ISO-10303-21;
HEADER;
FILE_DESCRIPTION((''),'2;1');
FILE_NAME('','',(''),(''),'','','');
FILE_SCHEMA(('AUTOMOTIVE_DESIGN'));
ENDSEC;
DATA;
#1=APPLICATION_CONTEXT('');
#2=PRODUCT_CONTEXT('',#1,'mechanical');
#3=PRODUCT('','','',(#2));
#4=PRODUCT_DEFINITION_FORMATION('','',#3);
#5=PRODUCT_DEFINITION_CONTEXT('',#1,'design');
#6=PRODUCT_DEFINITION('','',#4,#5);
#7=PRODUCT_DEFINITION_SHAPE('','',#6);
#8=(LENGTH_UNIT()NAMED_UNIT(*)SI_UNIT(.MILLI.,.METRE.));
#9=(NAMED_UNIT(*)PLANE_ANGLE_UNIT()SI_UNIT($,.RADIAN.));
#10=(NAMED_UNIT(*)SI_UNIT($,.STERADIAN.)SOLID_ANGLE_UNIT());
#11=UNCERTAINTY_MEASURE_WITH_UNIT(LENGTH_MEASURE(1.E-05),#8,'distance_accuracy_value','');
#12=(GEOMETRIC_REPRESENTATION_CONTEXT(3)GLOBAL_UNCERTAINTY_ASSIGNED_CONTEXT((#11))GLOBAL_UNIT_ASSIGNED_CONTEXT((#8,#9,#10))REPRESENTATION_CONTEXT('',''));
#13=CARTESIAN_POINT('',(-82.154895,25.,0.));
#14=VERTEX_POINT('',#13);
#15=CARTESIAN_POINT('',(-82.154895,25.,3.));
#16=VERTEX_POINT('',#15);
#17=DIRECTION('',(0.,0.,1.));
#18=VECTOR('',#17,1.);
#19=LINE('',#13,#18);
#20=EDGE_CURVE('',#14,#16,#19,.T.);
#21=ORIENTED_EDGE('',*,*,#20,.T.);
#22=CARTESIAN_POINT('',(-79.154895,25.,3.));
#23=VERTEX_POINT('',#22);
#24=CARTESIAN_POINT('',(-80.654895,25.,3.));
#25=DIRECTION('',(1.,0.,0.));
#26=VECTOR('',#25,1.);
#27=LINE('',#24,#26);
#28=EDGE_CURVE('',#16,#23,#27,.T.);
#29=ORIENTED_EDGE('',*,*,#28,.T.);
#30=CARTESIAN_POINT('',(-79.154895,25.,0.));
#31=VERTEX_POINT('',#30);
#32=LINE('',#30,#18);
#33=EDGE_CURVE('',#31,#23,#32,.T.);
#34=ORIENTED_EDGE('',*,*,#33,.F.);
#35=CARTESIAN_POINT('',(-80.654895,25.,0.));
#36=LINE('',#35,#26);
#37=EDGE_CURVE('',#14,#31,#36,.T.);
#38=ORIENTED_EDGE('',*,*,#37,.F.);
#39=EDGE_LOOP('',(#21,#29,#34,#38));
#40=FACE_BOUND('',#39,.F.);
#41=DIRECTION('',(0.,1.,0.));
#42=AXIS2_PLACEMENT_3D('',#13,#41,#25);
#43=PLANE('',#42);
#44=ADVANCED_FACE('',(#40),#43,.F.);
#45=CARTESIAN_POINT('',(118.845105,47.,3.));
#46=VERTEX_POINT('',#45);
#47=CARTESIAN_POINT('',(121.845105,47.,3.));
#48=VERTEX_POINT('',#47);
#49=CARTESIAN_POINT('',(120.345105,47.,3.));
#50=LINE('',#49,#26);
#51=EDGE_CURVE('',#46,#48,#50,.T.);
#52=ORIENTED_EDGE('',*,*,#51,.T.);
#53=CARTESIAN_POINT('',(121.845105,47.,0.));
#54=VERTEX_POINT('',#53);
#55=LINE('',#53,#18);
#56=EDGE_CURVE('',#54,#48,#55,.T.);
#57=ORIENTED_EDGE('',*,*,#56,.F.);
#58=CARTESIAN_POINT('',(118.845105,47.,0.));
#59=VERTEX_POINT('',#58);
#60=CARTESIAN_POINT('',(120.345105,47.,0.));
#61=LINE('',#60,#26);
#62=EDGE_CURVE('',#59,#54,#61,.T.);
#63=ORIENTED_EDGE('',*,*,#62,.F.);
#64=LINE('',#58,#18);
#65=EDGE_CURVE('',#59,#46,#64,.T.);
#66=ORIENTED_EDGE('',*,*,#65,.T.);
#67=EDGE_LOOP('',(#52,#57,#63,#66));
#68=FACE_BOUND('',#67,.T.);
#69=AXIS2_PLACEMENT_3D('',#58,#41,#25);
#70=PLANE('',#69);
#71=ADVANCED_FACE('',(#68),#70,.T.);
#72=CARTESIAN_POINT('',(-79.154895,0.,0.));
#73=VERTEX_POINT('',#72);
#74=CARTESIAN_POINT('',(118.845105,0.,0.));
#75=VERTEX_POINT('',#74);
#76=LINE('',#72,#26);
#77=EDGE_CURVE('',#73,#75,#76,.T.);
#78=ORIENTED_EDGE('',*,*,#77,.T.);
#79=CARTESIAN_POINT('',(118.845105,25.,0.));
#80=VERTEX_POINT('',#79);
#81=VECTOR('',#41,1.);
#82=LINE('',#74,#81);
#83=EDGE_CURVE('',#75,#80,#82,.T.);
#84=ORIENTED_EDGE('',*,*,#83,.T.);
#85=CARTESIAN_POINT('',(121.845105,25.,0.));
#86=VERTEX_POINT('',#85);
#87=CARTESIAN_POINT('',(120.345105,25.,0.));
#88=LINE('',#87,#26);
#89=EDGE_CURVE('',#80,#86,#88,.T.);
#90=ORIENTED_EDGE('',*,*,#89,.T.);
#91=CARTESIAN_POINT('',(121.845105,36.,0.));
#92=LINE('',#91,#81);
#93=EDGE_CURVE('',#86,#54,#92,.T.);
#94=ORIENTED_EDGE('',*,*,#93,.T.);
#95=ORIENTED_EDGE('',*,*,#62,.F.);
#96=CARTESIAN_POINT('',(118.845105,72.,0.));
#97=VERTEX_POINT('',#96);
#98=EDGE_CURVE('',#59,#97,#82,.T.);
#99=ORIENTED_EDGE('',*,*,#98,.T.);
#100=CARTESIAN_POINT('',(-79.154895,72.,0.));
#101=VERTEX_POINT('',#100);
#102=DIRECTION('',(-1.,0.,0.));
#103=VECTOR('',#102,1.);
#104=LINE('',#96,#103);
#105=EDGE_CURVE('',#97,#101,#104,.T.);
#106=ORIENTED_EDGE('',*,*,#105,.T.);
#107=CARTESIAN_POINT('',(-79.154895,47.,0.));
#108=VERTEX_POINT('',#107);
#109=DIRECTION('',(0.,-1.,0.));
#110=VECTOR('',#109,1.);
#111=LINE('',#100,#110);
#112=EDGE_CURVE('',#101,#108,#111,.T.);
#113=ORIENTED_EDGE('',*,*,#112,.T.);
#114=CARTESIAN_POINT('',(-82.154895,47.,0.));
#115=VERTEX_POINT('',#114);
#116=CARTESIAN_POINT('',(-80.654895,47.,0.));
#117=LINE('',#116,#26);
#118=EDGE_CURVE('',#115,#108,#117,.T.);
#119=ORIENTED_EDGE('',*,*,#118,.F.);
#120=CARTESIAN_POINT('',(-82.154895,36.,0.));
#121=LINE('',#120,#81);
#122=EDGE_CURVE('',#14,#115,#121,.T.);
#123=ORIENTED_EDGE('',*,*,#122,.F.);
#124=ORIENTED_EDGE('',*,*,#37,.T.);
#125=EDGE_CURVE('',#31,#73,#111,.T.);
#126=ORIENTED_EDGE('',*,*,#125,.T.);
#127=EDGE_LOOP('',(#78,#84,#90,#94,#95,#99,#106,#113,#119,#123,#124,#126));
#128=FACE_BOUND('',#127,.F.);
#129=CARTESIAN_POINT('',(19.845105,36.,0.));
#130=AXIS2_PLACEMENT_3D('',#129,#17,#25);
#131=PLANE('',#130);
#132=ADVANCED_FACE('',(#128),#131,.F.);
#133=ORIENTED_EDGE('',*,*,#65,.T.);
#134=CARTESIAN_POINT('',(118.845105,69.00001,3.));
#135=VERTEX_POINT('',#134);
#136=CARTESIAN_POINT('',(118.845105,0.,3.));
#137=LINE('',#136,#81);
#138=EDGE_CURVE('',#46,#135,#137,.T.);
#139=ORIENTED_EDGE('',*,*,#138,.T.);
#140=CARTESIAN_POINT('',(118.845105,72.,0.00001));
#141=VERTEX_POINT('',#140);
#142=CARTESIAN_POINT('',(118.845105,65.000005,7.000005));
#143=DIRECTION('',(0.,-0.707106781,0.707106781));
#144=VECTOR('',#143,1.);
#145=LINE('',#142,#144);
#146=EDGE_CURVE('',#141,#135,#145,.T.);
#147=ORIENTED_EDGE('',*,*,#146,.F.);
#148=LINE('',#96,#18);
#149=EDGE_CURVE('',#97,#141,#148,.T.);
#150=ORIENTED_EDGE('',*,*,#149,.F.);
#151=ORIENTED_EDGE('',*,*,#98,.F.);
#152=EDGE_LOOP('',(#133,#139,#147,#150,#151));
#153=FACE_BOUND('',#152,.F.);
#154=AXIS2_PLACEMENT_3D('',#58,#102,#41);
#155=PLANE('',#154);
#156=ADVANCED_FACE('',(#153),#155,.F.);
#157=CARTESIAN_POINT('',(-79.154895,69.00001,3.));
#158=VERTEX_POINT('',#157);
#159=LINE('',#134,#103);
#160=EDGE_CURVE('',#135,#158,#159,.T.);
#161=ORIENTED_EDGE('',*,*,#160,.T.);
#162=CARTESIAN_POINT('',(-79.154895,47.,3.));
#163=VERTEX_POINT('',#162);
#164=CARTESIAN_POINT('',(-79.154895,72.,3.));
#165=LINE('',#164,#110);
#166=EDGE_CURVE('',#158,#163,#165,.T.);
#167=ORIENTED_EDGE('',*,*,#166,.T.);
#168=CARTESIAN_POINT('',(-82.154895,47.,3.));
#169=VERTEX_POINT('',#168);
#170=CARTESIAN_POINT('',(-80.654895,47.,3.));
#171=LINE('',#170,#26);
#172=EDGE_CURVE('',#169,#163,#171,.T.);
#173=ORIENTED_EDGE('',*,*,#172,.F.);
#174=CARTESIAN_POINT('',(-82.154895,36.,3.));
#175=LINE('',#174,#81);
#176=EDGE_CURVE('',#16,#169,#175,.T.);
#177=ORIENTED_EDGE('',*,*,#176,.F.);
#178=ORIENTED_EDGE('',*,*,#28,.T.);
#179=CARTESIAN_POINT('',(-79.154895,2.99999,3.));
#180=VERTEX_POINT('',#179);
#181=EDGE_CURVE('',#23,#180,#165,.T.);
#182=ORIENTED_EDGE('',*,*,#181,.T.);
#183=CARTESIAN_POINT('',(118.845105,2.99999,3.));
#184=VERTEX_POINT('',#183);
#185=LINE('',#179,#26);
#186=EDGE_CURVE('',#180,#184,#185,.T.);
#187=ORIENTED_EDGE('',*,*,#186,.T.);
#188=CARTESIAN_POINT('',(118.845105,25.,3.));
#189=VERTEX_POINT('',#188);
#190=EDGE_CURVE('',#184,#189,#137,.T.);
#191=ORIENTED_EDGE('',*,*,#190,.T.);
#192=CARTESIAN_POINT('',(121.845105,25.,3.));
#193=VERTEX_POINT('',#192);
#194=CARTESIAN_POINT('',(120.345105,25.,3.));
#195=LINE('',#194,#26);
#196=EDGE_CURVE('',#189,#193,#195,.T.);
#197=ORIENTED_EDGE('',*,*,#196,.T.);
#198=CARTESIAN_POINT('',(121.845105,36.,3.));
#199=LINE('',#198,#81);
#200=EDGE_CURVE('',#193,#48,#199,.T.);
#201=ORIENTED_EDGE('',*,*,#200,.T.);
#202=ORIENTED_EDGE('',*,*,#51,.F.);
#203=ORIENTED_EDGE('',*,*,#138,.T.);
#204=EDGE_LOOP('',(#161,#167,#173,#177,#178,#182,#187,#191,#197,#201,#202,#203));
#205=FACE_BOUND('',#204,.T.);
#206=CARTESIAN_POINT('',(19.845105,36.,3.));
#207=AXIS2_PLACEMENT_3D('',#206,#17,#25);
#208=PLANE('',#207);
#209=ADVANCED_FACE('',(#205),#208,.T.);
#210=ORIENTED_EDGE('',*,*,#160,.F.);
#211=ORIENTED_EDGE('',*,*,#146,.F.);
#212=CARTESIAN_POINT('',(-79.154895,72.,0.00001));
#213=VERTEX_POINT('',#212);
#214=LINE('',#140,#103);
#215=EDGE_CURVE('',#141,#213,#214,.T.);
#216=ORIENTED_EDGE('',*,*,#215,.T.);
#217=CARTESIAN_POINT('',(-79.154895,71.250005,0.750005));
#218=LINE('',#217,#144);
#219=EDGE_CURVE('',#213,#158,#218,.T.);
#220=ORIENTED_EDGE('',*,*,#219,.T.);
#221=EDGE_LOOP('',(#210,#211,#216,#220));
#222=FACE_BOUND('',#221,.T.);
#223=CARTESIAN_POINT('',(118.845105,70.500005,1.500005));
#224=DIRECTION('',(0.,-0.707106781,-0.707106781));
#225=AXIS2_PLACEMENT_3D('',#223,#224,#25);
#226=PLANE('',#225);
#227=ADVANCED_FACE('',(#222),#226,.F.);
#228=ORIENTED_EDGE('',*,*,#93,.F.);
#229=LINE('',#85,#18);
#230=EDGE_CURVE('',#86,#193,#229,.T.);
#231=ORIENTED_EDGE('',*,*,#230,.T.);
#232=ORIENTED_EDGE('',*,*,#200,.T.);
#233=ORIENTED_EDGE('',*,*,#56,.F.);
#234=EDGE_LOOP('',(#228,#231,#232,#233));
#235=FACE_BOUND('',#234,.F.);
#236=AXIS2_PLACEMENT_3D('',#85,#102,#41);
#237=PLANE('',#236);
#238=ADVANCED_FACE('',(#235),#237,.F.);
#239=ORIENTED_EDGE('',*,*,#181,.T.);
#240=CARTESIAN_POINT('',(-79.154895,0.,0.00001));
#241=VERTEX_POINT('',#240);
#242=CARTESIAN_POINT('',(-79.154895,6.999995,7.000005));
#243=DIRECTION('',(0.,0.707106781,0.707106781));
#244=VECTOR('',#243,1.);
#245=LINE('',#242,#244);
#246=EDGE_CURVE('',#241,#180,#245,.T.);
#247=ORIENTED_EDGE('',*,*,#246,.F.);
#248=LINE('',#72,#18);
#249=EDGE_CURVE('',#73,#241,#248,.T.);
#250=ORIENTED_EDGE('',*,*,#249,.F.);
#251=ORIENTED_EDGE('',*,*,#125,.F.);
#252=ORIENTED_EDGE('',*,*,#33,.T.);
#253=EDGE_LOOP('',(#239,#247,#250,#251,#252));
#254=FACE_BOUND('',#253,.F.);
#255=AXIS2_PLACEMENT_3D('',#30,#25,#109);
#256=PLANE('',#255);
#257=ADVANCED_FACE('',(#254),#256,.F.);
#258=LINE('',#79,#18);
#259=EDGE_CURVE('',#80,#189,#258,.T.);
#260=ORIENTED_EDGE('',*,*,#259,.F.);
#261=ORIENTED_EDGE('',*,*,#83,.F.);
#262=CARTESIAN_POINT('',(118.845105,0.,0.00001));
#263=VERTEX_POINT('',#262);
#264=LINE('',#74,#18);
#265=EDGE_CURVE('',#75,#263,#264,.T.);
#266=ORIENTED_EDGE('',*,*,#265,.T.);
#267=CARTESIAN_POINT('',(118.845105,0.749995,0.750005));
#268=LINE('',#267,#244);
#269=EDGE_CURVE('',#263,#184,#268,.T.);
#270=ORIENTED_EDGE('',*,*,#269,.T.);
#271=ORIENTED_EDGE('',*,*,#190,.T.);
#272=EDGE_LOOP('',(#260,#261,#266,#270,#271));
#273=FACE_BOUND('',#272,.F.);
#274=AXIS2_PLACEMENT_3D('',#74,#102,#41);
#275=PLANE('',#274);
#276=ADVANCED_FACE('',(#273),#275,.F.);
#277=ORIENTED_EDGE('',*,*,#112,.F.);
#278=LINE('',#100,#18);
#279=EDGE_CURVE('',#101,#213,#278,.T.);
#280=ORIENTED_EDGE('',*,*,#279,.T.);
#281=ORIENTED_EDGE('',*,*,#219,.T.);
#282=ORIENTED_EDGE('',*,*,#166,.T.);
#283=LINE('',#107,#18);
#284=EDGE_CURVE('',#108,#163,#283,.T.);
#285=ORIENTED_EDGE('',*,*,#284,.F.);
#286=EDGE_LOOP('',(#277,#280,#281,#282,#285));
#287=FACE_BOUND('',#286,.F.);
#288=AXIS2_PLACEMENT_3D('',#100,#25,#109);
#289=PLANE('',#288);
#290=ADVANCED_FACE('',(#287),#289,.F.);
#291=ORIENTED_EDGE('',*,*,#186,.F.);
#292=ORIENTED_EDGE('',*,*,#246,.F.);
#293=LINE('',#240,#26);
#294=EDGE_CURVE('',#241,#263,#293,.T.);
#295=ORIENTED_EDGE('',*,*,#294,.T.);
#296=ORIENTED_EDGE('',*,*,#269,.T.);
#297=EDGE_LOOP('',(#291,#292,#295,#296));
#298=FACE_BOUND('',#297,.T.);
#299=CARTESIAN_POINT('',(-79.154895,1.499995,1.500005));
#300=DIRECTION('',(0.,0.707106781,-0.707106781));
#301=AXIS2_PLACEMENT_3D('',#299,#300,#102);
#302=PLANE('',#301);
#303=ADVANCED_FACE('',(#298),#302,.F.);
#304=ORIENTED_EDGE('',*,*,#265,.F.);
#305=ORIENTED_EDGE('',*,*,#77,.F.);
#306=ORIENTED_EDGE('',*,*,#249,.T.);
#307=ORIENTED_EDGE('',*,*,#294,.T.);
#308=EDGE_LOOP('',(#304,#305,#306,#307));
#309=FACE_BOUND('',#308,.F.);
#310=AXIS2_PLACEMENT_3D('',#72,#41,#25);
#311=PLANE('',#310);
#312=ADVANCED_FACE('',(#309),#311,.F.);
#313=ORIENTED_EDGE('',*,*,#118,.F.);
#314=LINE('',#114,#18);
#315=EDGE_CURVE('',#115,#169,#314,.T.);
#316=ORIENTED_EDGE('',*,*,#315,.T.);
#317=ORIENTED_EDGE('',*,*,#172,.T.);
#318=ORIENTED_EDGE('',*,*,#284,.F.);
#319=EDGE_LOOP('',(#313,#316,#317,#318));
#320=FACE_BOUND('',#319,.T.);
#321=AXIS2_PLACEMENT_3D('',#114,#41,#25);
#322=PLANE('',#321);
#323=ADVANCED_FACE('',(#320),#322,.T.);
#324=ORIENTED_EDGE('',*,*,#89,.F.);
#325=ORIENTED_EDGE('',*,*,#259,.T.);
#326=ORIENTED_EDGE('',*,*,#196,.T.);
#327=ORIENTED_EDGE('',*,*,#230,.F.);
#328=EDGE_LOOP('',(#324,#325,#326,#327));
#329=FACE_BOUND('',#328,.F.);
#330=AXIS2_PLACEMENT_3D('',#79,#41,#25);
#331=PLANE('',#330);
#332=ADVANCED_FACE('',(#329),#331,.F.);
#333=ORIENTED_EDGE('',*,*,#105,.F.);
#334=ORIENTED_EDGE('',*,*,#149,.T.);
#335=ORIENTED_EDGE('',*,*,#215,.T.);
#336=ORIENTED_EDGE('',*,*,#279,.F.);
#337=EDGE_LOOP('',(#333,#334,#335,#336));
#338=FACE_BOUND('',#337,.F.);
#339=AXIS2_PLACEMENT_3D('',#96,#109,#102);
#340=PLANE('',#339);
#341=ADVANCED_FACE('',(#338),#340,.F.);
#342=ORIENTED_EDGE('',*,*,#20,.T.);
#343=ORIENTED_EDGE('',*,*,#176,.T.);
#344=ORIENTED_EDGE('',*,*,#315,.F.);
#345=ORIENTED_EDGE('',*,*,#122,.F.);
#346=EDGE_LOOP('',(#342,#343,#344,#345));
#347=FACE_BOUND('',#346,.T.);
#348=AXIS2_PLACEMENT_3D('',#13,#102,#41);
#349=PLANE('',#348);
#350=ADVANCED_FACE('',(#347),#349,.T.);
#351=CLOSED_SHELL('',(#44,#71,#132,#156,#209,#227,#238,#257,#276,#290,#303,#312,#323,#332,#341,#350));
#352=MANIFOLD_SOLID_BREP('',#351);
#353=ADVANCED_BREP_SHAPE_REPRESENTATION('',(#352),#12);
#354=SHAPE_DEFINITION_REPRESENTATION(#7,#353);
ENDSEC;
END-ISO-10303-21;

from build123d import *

# Parameters (mm, degrees)
F0_W     = 3
F0_H     = 22
F1_DEPTH = 3
F2_SIZE  = 2.99999


# Not quite as in the source:
# - a fillet or chamfer is up to 0.001 mm smaller than in the source, because OpenCascade refuses the exact size


with BuildPart() as f1:
    # F0 (on Top) → F1 (new body)
    with BuildSketch(Plane.XY):
        Polygon((-79.1548952963, 25), (-79.1548952963, 0), (118.8451047037, 0), (118.8451047037, 25), (118.8451047037, 47), (118.8451047037, 72), (-79.1548952963, 72), (-79.1548952963, 47), align=None)
        with Locations((120.3451047037, 36)):
            Rectangle(F0_W, F0_H)
        with Locations((-80.6548952963, 36)):
            Rectangle(F0_W, F0_H)
    extrude(amount=F1_DEPTH)

    # F2 (size 3 in the source; OpenCascade refuses exactly that, so slightly less here)
    f2_edges = [f1.edges().sort_by_distance(p)[0] for p in [
        (19.845105, 0, 3),
        (19.845105, 72, 3),
    ]]
    chamfer(f2_edges, length=F2_SIZE)


solid = f1.part
